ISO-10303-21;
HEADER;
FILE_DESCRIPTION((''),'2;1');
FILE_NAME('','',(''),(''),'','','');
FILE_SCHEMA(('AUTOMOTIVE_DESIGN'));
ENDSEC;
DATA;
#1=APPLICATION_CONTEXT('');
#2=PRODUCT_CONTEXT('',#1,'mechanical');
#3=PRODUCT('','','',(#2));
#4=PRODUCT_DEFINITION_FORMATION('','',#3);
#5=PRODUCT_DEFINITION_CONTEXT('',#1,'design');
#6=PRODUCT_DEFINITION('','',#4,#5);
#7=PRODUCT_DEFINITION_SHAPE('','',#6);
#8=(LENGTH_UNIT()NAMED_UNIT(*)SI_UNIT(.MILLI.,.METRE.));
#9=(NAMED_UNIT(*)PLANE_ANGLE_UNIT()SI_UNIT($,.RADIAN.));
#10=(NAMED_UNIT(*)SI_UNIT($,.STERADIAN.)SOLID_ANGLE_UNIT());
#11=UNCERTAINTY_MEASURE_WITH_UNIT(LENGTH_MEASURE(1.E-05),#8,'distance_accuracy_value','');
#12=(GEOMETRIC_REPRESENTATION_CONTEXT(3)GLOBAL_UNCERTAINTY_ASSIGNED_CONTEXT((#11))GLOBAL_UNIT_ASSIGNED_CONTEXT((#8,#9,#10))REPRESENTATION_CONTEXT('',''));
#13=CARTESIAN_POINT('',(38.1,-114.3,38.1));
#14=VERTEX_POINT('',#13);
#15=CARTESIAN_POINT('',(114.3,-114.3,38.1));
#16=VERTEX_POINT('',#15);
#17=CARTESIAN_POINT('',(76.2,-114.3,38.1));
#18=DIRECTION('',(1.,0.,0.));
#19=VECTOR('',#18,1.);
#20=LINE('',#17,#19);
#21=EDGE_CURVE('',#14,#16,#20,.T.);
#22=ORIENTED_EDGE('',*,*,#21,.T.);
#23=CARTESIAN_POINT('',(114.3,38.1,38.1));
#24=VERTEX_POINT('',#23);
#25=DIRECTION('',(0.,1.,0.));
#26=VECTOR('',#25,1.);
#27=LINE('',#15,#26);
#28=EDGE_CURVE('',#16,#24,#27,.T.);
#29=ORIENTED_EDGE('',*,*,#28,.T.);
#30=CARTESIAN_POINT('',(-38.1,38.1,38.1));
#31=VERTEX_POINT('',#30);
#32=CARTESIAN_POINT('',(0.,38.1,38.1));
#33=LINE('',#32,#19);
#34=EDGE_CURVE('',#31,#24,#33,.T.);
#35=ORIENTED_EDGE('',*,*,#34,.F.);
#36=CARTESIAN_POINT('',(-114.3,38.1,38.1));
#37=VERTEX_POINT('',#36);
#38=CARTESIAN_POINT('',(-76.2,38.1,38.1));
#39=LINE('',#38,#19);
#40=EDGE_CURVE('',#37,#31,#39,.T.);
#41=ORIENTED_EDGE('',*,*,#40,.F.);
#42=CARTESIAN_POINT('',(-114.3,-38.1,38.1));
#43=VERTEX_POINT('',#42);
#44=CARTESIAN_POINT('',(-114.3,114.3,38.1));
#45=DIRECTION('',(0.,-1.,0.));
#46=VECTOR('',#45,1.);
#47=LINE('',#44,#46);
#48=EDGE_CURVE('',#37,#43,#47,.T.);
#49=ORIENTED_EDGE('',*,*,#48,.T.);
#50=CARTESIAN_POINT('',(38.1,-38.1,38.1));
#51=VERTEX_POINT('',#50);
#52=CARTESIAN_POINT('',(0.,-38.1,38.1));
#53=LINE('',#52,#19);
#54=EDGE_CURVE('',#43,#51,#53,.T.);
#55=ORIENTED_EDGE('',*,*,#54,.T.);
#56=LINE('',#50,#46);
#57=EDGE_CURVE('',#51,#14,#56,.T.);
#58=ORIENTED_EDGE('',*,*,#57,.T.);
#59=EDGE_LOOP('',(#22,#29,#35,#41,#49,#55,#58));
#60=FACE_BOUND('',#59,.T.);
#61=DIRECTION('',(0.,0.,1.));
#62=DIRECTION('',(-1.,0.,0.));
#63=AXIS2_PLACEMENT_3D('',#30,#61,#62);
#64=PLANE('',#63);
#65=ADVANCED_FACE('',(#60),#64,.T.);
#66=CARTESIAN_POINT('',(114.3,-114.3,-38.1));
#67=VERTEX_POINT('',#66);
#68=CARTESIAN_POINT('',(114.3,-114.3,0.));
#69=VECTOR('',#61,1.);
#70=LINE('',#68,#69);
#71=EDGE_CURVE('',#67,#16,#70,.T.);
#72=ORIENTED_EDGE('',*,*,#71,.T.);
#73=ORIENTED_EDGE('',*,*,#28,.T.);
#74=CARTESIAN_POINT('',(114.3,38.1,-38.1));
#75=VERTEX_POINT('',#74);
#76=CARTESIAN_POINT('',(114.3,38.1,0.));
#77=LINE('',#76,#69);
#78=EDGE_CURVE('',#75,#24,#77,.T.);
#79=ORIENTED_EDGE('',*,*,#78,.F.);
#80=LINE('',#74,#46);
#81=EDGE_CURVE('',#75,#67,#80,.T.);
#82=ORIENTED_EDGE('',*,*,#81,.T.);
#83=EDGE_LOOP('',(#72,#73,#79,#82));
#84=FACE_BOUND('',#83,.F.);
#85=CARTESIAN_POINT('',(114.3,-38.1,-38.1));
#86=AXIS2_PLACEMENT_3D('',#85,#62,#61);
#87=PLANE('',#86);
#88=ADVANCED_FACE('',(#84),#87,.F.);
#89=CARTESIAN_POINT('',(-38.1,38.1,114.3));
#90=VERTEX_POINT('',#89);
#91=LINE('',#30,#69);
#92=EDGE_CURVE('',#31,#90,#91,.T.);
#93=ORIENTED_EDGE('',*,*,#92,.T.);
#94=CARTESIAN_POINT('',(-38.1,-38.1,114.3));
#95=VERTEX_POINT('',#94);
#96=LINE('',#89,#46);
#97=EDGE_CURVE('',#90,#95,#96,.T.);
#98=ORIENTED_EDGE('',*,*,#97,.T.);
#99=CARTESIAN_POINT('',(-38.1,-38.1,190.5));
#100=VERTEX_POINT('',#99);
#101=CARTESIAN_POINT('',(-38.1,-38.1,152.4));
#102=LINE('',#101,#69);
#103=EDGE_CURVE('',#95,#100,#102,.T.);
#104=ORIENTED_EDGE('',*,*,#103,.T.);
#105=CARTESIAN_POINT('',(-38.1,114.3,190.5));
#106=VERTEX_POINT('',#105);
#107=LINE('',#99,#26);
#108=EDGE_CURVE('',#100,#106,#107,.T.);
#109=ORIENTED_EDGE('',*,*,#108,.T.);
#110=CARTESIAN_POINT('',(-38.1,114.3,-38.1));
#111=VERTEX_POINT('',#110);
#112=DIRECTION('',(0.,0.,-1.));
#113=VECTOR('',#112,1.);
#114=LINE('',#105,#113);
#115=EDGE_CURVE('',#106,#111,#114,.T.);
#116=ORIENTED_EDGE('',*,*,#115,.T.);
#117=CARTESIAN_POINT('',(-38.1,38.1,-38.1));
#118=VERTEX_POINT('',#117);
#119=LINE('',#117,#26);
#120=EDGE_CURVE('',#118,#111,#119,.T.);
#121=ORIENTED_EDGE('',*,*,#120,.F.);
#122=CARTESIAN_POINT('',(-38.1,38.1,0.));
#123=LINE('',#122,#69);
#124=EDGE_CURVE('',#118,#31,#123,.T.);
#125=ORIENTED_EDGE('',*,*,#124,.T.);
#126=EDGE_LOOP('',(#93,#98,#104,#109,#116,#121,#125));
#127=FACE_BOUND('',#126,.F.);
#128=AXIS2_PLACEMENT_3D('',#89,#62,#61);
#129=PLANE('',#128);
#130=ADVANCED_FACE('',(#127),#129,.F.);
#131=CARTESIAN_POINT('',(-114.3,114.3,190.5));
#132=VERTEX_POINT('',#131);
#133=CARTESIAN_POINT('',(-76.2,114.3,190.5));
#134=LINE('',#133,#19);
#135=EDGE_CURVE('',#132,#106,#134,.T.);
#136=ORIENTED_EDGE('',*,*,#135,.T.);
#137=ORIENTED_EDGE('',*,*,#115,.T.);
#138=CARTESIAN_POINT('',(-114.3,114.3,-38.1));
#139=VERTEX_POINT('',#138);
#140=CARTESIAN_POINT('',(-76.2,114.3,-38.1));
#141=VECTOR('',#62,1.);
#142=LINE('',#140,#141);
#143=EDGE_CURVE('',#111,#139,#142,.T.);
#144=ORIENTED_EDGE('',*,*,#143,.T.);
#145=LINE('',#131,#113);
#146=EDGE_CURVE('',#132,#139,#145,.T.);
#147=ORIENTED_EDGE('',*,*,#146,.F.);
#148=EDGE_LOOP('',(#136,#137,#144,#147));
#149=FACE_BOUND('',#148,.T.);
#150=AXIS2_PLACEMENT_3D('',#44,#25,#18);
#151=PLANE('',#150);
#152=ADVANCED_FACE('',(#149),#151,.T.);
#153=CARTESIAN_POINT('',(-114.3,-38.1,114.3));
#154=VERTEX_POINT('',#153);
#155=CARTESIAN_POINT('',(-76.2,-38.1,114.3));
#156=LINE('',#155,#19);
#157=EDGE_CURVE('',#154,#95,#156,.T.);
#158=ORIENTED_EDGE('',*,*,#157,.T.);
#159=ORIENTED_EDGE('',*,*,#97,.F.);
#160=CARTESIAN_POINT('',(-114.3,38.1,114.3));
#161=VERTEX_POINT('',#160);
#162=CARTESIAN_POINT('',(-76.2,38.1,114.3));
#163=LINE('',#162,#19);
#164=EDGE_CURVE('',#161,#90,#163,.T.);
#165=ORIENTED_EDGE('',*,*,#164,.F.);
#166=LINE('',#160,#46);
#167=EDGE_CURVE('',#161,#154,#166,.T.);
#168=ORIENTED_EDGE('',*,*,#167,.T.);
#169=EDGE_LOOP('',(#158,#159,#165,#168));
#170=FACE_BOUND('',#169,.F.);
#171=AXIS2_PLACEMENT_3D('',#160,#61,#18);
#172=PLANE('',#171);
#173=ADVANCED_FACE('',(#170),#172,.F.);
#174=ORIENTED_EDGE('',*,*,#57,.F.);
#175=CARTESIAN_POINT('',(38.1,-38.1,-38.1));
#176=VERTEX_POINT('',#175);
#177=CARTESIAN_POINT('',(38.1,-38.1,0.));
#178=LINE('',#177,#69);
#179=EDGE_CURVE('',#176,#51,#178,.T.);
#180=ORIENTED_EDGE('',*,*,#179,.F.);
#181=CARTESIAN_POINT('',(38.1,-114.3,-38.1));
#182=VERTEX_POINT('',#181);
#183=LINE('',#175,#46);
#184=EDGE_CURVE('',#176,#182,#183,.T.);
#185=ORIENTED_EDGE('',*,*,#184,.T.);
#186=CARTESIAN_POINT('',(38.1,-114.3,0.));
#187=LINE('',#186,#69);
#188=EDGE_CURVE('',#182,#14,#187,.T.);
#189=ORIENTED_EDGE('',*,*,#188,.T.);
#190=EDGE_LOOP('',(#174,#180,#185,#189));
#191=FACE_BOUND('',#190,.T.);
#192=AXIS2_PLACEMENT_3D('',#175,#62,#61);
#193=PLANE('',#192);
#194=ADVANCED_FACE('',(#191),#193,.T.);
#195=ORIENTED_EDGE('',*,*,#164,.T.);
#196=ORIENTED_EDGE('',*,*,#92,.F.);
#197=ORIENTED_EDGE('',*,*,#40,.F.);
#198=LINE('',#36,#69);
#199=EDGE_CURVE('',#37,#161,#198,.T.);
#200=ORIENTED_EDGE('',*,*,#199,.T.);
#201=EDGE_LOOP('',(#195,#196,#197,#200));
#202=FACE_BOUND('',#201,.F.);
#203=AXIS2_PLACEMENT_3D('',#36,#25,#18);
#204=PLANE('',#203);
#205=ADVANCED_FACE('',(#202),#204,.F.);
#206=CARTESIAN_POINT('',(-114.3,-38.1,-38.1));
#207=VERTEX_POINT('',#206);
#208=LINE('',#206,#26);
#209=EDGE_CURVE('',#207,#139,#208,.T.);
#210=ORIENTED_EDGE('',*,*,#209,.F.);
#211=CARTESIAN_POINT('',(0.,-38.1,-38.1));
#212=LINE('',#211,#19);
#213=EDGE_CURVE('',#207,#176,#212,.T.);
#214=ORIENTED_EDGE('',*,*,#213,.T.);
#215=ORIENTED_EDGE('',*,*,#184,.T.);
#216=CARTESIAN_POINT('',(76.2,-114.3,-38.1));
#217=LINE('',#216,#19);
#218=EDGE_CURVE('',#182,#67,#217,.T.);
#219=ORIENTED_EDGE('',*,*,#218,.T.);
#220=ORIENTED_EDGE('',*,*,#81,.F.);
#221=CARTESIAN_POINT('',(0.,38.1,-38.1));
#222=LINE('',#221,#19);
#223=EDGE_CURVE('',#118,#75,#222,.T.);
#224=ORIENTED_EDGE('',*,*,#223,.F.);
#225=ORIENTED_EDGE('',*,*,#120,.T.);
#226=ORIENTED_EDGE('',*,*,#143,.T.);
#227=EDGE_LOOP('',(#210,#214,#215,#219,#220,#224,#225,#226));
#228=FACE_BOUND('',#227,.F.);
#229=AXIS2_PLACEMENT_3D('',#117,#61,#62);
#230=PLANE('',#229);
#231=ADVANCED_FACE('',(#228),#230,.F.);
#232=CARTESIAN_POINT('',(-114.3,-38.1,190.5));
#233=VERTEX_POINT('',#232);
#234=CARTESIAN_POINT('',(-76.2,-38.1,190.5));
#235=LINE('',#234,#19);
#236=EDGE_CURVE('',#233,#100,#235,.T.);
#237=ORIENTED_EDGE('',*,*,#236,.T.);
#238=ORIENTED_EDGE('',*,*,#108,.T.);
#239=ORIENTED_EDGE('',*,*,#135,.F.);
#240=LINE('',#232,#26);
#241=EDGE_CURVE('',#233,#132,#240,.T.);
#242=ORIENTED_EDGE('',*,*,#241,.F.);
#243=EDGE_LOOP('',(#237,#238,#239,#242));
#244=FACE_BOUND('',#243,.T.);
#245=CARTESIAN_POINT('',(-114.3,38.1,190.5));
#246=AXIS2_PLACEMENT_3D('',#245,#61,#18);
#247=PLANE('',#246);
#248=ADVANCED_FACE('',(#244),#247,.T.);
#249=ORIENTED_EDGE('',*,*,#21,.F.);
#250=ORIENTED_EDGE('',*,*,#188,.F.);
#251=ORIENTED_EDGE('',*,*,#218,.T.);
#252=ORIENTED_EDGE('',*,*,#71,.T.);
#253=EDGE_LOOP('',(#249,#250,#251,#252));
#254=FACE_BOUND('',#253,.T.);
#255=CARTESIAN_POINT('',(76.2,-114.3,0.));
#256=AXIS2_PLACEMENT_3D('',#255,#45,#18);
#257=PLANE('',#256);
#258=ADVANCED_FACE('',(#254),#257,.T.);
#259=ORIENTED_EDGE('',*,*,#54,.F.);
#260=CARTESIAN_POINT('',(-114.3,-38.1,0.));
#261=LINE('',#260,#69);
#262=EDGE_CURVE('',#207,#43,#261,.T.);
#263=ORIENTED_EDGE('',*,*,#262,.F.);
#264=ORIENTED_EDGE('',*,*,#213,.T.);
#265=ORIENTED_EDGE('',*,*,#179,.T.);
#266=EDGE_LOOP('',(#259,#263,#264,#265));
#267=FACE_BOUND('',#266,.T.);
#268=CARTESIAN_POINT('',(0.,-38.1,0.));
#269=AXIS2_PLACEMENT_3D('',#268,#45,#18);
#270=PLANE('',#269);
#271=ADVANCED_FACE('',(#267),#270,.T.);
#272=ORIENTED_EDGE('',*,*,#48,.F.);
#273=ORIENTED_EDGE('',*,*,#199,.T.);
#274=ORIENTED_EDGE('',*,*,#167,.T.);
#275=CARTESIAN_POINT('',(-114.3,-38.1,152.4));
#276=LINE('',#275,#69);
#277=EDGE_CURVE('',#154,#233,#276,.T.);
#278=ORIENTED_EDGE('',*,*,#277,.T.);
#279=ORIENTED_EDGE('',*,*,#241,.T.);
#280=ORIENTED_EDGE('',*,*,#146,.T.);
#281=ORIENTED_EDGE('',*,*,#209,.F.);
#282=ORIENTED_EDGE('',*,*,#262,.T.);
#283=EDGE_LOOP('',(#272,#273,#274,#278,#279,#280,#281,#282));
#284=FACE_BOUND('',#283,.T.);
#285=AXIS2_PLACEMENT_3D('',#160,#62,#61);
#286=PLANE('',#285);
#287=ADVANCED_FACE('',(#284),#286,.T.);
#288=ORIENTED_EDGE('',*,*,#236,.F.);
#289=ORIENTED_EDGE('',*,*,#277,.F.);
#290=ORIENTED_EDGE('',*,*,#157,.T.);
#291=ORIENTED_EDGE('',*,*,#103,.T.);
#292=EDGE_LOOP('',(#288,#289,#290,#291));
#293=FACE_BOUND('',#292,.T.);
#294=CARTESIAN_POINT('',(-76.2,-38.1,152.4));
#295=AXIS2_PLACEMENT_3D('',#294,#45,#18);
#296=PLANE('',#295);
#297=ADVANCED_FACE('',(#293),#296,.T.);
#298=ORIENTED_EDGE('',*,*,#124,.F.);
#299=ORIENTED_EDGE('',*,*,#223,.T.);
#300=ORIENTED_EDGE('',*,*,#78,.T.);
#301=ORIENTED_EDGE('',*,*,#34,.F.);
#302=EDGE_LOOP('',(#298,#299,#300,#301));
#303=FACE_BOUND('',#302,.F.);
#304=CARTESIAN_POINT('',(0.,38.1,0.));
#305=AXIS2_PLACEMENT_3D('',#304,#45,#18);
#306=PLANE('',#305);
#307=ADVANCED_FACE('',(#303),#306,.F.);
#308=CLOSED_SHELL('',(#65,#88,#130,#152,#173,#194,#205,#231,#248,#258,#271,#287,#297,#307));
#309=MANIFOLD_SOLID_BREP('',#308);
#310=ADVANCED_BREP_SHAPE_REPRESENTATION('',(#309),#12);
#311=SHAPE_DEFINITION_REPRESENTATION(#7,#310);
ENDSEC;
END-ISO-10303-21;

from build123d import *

# Parameters (mm, degrees)
F1_W      = 228.6
F1_H      = 76.2
F2_DEPTH  = 38.1
F3_W      = 76.2
F3_H      = 76.2
F4_DEPTH  = 76.2
F5_W      = 76.2
F5_H      = 76.2
F6_DEPTH  = 76.2
F7_W      = 76.2
F7_H      = 76.2
F8_DEPTH  = 152.4
F9_W      = 76.2
F9_H      = 76.2
F10_DEPTH = 76.2


# Not quite as in the source:
# - a variable given as a bare number and used for a length is read in inches; the dataset says mm whatever the document's units were


with BuildPart() as f2:
    # F1 (on Front) → F2 (new body, symmetric)
    with BuildSketch(Plane.XZ):
        Rectangle(F1_W, F1_H)
    extrude(amount=F2_DEPTH, both=True)

    # F3 (on face) → F4 (join)
    with BuildSketch(Plane.XZ.offset(38.1)):
        with Locations((76.2, 0)):
            Rectangle(F3_W, F3_H)
    extrude(amount=F4_DEPTH)

    # F5 (on face) → F6 (join)
    with BuildSketch(Plane(origin=(0, 38.1, 0), x_dir=(-1, 0, 0), z_dir=(0, 1, 0))):
        with Locations((76.2, 0)):
            Rectangle(F5_W, F5_H)
    extrude(amount=F6_DEPTH)

    # F7 (on face) → F8 (join)
    with BuildSketch(Plane.XY.offset(38.1)):
        with Locations((-76.2, 76.2)):
            Rectangle(F7_W, F7_H)
    extrude(amount=F8_DEPTH)

    # F9 (on face) → F10 (join)
    with BuildSketch(Plane.XZ.offset(-38.1)):
        with Locations((-76.2, 152.4)):
            Rectangle(F9_W, F9_H)
    extrude(amount=F10_DEPTH)


solid = f2.part
